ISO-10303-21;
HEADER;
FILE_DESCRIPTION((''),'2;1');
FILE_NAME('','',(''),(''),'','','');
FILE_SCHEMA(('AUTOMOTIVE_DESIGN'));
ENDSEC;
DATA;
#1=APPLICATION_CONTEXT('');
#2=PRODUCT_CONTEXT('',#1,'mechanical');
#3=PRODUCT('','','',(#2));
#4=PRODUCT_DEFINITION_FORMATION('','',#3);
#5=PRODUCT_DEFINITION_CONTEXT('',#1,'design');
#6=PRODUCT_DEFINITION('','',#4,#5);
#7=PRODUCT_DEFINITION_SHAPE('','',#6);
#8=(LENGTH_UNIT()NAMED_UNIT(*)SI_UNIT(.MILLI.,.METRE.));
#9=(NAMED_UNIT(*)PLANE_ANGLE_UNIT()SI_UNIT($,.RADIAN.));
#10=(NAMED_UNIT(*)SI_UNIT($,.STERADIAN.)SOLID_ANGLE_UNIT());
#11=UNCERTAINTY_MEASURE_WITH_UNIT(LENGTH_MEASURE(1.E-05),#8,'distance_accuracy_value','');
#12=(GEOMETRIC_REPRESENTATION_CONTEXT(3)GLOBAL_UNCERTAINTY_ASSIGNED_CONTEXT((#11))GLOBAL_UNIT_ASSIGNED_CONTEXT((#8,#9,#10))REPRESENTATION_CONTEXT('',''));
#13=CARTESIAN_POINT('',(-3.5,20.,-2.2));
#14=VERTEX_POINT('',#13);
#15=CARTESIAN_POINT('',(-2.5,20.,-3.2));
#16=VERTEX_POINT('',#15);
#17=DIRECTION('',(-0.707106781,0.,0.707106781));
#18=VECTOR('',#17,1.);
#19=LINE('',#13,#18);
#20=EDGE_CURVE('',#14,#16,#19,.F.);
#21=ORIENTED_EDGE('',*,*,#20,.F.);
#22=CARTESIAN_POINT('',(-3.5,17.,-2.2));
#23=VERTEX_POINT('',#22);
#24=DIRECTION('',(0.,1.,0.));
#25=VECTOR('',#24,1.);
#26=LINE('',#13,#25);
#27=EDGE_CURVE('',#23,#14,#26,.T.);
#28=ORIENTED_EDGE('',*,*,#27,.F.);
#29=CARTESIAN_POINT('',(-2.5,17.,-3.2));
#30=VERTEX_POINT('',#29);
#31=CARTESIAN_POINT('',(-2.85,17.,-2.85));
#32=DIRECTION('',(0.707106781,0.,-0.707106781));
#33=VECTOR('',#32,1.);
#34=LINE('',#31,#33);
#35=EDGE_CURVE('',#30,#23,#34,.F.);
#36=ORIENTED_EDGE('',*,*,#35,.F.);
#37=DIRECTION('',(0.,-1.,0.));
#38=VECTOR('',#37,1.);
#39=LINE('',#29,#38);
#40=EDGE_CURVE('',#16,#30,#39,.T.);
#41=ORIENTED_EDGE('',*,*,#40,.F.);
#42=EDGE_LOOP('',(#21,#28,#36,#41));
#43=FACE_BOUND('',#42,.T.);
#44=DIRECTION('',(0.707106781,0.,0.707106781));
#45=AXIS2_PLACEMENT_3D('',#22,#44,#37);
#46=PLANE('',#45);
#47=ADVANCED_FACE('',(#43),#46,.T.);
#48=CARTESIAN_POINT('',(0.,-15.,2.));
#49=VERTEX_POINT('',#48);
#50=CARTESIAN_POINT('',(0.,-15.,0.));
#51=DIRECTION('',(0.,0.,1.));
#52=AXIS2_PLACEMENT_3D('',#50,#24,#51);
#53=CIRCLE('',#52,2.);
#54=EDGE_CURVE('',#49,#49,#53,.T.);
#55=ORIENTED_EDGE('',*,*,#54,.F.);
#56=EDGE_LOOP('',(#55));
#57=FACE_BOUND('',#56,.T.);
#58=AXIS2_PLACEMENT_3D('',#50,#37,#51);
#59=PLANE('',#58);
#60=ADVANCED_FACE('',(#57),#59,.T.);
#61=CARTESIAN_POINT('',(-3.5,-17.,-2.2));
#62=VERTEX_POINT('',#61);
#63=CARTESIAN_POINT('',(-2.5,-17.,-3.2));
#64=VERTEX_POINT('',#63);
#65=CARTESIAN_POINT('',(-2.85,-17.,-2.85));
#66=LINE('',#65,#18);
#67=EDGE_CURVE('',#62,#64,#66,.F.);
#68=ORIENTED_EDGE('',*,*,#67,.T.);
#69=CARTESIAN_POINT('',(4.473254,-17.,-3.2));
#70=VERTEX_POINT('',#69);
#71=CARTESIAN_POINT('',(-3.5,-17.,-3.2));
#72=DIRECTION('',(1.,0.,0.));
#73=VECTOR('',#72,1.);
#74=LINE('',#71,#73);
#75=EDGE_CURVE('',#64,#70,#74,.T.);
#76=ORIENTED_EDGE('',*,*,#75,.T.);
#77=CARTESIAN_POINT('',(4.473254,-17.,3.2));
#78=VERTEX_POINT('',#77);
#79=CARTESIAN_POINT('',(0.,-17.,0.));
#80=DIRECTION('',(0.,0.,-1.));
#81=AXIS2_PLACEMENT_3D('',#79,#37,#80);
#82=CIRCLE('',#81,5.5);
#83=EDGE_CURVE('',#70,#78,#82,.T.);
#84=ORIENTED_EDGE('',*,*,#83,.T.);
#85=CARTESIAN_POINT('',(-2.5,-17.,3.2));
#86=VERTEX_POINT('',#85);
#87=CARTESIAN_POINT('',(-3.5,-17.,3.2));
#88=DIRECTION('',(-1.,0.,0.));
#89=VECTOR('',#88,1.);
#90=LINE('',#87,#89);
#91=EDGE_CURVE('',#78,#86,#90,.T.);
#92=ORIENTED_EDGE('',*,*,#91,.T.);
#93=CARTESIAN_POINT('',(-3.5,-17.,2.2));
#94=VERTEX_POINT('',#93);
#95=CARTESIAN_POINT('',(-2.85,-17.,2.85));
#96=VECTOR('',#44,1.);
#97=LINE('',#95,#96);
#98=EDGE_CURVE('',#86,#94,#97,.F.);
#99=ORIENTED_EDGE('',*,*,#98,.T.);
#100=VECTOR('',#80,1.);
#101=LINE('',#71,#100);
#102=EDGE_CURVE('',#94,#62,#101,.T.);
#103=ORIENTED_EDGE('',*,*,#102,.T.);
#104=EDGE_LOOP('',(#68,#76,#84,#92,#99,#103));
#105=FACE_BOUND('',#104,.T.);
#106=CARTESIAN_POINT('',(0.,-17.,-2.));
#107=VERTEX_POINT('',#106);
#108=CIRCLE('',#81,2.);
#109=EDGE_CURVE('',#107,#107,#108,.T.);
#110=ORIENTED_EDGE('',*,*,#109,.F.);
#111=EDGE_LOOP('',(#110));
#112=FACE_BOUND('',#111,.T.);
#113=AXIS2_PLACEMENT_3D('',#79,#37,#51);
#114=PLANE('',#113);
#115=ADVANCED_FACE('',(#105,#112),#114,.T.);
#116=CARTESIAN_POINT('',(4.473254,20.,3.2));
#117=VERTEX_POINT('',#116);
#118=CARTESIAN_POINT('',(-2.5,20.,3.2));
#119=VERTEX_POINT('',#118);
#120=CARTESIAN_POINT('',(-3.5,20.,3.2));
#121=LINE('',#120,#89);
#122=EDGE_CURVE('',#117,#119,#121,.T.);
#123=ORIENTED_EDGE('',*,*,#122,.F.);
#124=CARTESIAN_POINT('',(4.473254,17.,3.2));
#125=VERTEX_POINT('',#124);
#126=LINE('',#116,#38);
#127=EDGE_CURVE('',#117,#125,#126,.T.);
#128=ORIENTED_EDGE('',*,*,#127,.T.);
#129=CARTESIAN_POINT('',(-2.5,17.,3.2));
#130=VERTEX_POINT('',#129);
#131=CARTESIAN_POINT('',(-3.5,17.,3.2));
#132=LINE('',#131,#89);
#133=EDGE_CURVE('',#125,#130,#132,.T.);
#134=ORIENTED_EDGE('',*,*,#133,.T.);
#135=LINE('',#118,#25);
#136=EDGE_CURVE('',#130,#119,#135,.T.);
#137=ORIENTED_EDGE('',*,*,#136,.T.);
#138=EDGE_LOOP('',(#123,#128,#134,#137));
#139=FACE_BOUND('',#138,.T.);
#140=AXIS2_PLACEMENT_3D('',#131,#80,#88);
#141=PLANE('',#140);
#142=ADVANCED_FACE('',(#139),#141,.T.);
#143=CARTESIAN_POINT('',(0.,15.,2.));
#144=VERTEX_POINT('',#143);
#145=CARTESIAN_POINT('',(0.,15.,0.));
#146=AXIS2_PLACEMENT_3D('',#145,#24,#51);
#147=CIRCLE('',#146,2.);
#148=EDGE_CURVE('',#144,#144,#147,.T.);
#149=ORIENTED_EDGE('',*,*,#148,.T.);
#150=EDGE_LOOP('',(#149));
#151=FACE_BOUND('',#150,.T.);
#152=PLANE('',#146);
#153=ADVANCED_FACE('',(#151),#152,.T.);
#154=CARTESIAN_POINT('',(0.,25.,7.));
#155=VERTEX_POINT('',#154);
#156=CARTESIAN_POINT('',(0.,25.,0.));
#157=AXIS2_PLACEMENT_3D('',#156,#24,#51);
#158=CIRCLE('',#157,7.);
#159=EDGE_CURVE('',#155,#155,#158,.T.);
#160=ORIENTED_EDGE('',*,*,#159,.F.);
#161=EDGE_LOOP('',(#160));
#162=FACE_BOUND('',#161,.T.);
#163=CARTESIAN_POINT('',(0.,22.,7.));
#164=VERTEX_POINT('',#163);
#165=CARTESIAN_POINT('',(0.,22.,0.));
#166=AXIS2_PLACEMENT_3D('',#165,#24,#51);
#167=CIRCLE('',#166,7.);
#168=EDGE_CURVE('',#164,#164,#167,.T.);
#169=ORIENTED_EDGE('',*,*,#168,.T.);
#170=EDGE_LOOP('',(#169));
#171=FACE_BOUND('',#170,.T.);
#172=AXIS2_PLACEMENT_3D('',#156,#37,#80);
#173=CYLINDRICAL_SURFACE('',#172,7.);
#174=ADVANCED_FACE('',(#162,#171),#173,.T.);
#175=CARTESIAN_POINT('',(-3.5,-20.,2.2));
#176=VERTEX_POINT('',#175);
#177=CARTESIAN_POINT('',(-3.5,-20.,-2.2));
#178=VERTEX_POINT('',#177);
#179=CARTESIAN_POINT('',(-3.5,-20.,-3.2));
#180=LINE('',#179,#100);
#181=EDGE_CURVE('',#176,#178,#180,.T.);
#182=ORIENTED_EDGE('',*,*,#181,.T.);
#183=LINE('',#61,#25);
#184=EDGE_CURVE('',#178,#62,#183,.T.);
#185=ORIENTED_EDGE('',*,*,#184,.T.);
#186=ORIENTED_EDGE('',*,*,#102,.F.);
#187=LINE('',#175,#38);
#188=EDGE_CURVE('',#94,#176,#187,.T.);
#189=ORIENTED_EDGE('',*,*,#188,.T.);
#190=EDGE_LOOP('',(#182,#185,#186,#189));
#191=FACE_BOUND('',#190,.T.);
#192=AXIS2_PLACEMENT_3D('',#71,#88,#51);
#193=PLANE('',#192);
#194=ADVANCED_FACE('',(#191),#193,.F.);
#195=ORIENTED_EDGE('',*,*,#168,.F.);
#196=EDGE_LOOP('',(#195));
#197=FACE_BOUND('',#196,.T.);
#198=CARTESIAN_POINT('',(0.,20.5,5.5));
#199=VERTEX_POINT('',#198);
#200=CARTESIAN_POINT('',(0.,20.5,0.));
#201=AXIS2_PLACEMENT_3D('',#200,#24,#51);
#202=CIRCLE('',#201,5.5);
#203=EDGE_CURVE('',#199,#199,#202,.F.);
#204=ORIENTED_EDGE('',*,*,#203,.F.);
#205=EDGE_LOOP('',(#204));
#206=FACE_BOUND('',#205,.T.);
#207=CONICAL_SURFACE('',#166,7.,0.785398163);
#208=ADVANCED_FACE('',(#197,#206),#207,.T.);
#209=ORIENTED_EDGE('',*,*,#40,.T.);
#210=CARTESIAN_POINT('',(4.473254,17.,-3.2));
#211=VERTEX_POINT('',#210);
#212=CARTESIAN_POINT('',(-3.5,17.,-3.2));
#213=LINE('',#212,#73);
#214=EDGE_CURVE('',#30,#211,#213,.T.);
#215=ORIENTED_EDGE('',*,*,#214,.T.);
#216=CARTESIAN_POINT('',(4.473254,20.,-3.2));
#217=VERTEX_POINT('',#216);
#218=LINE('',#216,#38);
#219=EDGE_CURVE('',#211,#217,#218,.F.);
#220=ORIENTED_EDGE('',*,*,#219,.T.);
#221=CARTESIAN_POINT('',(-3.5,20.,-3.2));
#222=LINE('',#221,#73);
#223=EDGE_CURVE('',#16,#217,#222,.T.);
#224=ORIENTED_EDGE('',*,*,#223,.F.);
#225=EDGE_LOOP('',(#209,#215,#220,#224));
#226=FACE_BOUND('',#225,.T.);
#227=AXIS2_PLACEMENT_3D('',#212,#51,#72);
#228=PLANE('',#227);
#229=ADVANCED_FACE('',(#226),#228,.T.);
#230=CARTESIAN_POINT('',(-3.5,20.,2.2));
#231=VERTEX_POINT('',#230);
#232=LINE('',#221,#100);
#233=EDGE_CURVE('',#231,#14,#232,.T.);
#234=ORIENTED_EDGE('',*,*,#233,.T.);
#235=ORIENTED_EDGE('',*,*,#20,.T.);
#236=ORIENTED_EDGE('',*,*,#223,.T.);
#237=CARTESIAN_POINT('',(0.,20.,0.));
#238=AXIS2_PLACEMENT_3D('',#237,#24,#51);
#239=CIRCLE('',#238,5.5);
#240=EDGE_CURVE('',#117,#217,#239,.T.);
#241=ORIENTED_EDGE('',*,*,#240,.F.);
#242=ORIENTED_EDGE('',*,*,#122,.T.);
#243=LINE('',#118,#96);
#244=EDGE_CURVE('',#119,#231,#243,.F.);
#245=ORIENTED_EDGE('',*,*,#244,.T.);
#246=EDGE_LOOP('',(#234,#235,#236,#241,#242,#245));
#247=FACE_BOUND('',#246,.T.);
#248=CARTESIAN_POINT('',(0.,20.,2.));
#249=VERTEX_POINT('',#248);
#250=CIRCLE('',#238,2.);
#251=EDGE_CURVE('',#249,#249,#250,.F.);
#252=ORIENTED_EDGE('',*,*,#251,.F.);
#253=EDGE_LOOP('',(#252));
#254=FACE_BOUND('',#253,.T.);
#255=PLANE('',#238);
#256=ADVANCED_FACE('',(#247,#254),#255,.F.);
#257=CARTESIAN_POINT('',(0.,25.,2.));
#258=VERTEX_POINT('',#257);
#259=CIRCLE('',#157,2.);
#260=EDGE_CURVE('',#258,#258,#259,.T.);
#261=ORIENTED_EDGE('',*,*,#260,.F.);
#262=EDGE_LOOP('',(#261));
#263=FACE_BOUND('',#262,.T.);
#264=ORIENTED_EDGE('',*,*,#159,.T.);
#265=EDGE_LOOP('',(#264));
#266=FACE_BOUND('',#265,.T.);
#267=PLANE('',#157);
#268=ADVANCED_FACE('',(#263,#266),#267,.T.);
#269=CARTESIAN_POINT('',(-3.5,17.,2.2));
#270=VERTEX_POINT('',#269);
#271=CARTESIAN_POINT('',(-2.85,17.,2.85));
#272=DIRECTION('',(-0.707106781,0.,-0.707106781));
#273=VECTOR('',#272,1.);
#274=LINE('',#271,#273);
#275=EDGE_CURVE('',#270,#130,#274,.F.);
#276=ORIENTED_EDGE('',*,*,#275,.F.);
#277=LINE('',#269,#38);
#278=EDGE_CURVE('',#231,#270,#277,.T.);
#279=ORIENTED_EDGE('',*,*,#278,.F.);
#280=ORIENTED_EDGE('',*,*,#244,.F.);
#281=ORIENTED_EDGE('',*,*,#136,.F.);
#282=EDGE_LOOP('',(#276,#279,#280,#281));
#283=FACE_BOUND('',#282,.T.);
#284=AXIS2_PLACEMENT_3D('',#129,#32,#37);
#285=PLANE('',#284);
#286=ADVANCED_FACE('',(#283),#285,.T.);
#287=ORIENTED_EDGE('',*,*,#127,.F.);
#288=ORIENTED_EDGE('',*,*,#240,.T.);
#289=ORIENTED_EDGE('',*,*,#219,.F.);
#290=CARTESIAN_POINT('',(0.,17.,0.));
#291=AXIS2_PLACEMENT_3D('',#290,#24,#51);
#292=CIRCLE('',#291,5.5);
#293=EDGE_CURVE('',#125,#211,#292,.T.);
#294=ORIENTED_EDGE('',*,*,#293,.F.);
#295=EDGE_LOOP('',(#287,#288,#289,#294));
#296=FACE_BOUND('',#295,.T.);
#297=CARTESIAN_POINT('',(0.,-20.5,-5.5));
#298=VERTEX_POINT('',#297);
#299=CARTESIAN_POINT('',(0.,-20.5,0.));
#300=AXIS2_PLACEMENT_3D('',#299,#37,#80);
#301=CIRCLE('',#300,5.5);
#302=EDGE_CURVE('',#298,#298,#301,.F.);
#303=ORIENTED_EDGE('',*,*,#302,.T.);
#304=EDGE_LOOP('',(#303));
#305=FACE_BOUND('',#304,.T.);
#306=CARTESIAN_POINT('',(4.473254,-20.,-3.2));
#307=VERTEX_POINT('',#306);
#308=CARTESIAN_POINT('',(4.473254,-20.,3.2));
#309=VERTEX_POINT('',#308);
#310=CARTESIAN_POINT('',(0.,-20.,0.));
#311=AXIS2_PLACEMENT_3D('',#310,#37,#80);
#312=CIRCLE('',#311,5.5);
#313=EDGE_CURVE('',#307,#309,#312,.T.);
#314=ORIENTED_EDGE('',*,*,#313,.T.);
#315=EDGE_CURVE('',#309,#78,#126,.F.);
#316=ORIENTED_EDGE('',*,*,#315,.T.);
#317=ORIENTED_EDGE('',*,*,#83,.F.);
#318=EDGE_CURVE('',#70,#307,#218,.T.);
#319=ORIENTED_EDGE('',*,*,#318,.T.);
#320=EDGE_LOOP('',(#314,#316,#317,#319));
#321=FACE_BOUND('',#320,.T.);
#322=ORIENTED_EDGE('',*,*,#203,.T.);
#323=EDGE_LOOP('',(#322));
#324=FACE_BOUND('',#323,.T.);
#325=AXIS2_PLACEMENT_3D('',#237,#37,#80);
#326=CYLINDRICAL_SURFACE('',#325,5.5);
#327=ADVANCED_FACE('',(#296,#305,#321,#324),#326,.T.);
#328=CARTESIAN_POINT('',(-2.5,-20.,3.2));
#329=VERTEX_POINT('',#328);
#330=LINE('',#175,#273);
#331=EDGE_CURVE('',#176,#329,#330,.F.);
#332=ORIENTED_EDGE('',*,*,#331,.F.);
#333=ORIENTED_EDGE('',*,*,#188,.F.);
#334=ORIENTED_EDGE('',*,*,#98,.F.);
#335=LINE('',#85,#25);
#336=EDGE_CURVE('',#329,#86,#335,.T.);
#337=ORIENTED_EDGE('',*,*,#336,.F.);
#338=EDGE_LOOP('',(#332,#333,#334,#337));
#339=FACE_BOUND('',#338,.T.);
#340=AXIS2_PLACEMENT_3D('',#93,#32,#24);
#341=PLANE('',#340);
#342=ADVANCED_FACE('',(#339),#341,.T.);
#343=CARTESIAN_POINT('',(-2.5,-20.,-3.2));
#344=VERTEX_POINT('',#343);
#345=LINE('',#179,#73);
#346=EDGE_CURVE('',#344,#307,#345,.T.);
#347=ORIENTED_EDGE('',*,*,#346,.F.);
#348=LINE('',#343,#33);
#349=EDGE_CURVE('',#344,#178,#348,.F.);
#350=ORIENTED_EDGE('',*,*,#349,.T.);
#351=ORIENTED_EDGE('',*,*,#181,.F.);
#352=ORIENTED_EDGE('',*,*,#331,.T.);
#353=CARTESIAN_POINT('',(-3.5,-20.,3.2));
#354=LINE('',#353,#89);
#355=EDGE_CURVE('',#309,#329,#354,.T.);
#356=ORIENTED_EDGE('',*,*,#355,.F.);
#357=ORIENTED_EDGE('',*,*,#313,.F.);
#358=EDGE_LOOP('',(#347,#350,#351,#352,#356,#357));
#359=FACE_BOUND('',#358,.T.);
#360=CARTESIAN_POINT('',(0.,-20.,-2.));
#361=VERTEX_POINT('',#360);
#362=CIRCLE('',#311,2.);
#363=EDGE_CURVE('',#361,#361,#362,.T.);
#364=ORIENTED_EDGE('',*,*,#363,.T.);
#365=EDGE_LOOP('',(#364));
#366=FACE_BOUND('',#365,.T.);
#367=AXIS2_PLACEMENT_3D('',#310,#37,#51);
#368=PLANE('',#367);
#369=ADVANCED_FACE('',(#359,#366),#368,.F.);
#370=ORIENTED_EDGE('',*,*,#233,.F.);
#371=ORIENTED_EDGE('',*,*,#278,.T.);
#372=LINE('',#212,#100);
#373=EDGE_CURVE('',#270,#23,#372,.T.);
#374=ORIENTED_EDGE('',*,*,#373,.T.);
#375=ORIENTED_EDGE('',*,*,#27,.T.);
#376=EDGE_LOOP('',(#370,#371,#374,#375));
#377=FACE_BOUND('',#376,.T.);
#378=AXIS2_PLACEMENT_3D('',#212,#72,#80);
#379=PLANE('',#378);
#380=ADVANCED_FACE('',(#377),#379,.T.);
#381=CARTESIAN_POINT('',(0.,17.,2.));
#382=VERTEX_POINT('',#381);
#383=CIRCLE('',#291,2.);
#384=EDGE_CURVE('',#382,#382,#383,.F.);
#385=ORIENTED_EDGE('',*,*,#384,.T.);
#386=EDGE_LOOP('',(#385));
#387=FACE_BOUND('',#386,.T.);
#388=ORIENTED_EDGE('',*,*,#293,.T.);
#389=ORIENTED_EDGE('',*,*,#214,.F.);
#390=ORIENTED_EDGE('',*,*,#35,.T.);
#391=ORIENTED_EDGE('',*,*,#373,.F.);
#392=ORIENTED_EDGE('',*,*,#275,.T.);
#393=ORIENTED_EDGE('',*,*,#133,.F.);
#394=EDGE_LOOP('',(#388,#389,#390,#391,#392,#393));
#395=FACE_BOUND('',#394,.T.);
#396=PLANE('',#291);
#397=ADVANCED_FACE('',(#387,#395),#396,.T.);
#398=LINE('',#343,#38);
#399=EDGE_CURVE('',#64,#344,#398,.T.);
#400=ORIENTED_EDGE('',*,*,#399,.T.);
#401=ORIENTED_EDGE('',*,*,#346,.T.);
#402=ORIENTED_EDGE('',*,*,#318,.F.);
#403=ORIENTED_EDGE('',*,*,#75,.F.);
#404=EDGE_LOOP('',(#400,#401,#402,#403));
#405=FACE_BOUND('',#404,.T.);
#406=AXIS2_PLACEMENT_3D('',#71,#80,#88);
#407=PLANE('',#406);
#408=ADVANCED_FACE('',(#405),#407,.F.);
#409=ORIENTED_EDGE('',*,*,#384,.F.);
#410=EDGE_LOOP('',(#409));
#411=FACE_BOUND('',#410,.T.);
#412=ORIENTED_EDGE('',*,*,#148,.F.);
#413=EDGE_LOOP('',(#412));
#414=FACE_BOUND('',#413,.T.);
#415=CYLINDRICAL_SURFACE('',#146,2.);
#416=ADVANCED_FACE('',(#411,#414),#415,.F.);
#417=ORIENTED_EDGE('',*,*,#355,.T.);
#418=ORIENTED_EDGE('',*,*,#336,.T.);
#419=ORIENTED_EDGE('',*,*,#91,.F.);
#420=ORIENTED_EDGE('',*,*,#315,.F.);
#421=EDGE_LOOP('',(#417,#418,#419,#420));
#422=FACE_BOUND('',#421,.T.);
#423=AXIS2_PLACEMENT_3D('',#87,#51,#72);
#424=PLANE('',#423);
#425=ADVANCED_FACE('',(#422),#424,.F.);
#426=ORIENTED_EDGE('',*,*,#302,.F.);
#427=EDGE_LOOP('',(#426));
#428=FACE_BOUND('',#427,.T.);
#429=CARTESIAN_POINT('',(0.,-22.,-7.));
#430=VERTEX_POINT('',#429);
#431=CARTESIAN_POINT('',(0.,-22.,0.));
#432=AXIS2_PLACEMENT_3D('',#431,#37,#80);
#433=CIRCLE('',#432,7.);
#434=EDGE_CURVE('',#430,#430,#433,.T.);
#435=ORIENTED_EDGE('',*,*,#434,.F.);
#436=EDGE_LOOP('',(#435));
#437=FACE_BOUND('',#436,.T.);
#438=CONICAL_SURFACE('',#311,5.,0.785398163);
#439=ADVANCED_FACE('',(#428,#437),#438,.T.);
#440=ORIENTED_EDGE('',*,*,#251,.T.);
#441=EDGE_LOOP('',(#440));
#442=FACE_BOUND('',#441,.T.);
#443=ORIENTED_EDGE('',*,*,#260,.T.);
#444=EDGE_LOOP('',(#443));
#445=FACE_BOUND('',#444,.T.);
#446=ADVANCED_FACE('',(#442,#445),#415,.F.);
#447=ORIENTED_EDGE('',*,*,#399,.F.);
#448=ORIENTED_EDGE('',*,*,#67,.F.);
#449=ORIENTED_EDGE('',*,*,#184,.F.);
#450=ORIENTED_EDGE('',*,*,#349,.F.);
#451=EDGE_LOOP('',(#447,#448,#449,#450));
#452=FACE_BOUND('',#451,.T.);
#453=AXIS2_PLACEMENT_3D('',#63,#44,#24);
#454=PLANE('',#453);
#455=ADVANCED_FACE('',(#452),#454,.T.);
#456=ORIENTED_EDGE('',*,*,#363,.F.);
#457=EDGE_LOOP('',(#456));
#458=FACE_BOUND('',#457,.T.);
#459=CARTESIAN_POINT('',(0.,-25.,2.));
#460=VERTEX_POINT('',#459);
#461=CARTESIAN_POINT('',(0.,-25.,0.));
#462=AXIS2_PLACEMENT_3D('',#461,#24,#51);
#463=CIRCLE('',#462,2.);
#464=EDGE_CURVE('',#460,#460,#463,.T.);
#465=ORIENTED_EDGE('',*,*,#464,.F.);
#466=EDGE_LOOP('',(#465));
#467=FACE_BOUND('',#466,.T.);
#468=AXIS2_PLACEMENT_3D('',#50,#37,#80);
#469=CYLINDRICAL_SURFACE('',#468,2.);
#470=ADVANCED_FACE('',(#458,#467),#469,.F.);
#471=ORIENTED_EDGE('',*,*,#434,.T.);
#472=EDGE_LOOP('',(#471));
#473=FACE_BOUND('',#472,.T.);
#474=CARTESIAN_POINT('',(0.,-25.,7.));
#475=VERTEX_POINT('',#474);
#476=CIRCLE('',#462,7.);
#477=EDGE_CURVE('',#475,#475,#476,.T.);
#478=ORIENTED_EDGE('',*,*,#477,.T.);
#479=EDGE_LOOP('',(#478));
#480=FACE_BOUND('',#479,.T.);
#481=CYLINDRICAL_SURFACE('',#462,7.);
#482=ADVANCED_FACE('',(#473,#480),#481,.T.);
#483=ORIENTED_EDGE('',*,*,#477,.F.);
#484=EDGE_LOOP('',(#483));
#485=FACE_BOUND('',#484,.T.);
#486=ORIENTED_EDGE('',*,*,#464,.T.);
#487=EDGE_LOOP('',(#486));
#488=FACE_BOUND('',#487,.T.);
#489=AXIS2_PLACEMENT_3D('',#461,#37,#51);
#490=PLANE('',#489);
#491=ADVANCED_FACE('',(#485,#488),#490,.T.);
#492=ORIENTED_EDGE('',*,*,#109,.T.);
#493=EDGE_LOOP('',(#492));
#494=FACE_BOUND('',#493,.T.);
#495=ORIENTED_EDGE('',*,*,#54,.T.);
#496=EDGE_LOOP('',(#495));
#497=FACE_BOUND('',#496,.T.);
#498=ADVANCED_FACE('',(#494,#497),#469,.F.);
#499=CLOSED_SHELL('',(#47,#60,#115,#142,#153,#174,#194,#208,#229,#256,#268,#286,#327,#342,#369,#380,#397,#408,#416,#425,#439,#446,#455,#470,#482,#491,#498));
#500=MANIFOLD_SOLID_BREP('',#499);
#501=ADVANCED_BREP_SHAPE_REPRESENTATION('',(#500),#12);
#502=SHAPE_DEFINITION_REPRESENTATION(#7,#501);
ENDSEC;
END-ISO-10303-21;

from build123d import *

# Parameters (mm, degrees)
SKETCH1_R           = 5.5
BOSS_EXTRUDE1_DEPTH = 20
SKETCH2_R           = 7
BOSS_EXTRUDE2_DEPTH = 5
CHAMFER2_SIZE       = 2
SKETCH3_R           = 2
CUT_EXTRUDE1_DEPTH  = 10
SKETCH6_W           = 14.643635598
SKETCH6_H           = 6.4
CUT_EXTRUDE2_DEPTH  = 3
CHAMFER4_SIZE       = 1
MIRROR4_START       = -20
MIRROR4_2_DEPTH     = 3
MIRROR4_START_2     = -17
MIRROR4_3_OUTLINE_R = 2
MIRROR4_3_DEPTH     = 2


# Read off the part's stored shape, not the designer's step: Mirror4
with BuildPart() as part:
    # Sketch1 → Boss-Extrude1 (new, symmetric)
    with BuildSketch(Plane(origin=(0, 0, 0), x_dir=(1, 0, 0), z_dir=(0, 1, 0))):
        with Locations(Location((0, 0, 0), (0, 0, 270))):
            Circle(SKETCH1_R)
    extrude(amount=BOSS_EXTRUDE1_DEPTH, both=True)

    # Sketch2 → Boss-Extrude2 (add)
    with BuildSketch(Plane(origin=(0, 20, 0), x_dir=(1, 0, 0), z_dir=(0, 1, 0))):
        with Locations(Location((0, 0, 0), (0, 0, 270))):
            Circle(SKETCH2_R)
    extrude(amount=BOSS_EXTRUDE2_DEPTH)

    # Chamfer2
    # the kernel refuses this chamfer: 2 mm, written as the material it takes off along each edge
    with BuildSketch(Plane(origin=(0, 20, 0), x_dir=(0, 0, 1), z_dir=(-1, 0, 0))) as chamfer2_piece_1_section:
        Polygon((7, CHAMFER2_SIZE), (7 - CHAMFER2_SIZE, 0), (7, 0), align=None)
    chamfer2_piece_1 = revolve(axis=Axis((0, 20, 0), (0, 1, 0)), mode=Mode.PRIVATE)
    chamfer2_piece_1 = chamfer2_piece_1 - Plane(origin=(0, 21.24754516, 0), x_dir=(0, 0, 1), z_dir=(0, 1, 0)) * Cylinder(5.5, 28, mode=Mode.PRIVATE)
    add(chamfer2_piece_1, mode=Mode.SUBTRACT)

    # Sketch3 → Cut-Extrude1 (cut)
    with BuildSketch(Plane(origin=(0, 25, 0), x_dir=(1, 0, 0), z_dir=(0, 1, 0))):
        with Locations(Location((0, 0, 0), (0, 0, 270))):
            Circle(SKETCH3_R)
    extrude(amount=-CUT_EXTRUDE1_DEPTH, mode=Mode.SUBTRACT)

    # Sketch6 → Cut-Extrude2 (cut)
    with BuildSketch(Plane(origin=(0, 20, 0), x_dir=(-1, 0, 0), z_dir=(0, -1, 0))):
        with Locations((-3.821817799, 0)):
            Rectangle(SKETCH6_W, SKETCH6_H)
    extrude(amount=CUT_EXTRUDE2_DEPTH, mode=Mode.SUBTRACT)

    # Chamfer4
    chamfer4_edges = [part.edges().sort_by_distance(p)[0] for p in [
        (-3.5, 18.5, -3.2),
        (-3.5, 18.5, 3.2),
    ]]
    chamfer(chamfer4_edges, length=CHAMFER4_SIZE)

    # Mirror4 outline → Mirror4 (revolve)
    with BuildSketch(Plane.XY):
        Polygon((7, -25), (7, -22), (5.5, -20.5), (5.5, -20), (2, -20), (2, -25), align=None)
    revolve(axis=Axis((0, 0, 0), (0, 1, 0)))

    # Mirror4 2 outline → Mirror4 2 (cut)
    with BuildSketch(Plane(origin=(0, 0, 0), x_dir=(1, 0, 0), z_dir=(0, 1, 0)).offset(MIRROR4_START)):
        with BuildLine():
            Line((4.473253849, 3.2), (-2.5, 3.2))
            Line((-2.5, 3.2), (-3.5, 2.2))
            Line((-3.5, 2.2), (-3.5, -2.2))
            Line((-3.5, -2.2), (-2.5, -3.2))
            Line((-2.5, -3.2), (4.473253849, -3.2))
            ThreePointArc((4.473253849, -3.2), (5.5, 0), (4.473253849, 3.2))
        make_face()
    extrude(amount=MIRROR4_2_DEPTH, mode=Mode.SUBTRACT)

    # Mirror4 3 outline → Mirror4 3 (cut)
    with BuildSketch(Plane(origin=(0, 0, 0), x_dir=(1, 0, 0), z_dir=(0, 1, 0)).offset(MIRROR4_START_2)):
        Circle(MIRROR4_3_OUTLINE_R)
    extrude(amount=MIRROR4_3_DEPTH, mode=Mode.SUBTRACT)


solid = part.part
